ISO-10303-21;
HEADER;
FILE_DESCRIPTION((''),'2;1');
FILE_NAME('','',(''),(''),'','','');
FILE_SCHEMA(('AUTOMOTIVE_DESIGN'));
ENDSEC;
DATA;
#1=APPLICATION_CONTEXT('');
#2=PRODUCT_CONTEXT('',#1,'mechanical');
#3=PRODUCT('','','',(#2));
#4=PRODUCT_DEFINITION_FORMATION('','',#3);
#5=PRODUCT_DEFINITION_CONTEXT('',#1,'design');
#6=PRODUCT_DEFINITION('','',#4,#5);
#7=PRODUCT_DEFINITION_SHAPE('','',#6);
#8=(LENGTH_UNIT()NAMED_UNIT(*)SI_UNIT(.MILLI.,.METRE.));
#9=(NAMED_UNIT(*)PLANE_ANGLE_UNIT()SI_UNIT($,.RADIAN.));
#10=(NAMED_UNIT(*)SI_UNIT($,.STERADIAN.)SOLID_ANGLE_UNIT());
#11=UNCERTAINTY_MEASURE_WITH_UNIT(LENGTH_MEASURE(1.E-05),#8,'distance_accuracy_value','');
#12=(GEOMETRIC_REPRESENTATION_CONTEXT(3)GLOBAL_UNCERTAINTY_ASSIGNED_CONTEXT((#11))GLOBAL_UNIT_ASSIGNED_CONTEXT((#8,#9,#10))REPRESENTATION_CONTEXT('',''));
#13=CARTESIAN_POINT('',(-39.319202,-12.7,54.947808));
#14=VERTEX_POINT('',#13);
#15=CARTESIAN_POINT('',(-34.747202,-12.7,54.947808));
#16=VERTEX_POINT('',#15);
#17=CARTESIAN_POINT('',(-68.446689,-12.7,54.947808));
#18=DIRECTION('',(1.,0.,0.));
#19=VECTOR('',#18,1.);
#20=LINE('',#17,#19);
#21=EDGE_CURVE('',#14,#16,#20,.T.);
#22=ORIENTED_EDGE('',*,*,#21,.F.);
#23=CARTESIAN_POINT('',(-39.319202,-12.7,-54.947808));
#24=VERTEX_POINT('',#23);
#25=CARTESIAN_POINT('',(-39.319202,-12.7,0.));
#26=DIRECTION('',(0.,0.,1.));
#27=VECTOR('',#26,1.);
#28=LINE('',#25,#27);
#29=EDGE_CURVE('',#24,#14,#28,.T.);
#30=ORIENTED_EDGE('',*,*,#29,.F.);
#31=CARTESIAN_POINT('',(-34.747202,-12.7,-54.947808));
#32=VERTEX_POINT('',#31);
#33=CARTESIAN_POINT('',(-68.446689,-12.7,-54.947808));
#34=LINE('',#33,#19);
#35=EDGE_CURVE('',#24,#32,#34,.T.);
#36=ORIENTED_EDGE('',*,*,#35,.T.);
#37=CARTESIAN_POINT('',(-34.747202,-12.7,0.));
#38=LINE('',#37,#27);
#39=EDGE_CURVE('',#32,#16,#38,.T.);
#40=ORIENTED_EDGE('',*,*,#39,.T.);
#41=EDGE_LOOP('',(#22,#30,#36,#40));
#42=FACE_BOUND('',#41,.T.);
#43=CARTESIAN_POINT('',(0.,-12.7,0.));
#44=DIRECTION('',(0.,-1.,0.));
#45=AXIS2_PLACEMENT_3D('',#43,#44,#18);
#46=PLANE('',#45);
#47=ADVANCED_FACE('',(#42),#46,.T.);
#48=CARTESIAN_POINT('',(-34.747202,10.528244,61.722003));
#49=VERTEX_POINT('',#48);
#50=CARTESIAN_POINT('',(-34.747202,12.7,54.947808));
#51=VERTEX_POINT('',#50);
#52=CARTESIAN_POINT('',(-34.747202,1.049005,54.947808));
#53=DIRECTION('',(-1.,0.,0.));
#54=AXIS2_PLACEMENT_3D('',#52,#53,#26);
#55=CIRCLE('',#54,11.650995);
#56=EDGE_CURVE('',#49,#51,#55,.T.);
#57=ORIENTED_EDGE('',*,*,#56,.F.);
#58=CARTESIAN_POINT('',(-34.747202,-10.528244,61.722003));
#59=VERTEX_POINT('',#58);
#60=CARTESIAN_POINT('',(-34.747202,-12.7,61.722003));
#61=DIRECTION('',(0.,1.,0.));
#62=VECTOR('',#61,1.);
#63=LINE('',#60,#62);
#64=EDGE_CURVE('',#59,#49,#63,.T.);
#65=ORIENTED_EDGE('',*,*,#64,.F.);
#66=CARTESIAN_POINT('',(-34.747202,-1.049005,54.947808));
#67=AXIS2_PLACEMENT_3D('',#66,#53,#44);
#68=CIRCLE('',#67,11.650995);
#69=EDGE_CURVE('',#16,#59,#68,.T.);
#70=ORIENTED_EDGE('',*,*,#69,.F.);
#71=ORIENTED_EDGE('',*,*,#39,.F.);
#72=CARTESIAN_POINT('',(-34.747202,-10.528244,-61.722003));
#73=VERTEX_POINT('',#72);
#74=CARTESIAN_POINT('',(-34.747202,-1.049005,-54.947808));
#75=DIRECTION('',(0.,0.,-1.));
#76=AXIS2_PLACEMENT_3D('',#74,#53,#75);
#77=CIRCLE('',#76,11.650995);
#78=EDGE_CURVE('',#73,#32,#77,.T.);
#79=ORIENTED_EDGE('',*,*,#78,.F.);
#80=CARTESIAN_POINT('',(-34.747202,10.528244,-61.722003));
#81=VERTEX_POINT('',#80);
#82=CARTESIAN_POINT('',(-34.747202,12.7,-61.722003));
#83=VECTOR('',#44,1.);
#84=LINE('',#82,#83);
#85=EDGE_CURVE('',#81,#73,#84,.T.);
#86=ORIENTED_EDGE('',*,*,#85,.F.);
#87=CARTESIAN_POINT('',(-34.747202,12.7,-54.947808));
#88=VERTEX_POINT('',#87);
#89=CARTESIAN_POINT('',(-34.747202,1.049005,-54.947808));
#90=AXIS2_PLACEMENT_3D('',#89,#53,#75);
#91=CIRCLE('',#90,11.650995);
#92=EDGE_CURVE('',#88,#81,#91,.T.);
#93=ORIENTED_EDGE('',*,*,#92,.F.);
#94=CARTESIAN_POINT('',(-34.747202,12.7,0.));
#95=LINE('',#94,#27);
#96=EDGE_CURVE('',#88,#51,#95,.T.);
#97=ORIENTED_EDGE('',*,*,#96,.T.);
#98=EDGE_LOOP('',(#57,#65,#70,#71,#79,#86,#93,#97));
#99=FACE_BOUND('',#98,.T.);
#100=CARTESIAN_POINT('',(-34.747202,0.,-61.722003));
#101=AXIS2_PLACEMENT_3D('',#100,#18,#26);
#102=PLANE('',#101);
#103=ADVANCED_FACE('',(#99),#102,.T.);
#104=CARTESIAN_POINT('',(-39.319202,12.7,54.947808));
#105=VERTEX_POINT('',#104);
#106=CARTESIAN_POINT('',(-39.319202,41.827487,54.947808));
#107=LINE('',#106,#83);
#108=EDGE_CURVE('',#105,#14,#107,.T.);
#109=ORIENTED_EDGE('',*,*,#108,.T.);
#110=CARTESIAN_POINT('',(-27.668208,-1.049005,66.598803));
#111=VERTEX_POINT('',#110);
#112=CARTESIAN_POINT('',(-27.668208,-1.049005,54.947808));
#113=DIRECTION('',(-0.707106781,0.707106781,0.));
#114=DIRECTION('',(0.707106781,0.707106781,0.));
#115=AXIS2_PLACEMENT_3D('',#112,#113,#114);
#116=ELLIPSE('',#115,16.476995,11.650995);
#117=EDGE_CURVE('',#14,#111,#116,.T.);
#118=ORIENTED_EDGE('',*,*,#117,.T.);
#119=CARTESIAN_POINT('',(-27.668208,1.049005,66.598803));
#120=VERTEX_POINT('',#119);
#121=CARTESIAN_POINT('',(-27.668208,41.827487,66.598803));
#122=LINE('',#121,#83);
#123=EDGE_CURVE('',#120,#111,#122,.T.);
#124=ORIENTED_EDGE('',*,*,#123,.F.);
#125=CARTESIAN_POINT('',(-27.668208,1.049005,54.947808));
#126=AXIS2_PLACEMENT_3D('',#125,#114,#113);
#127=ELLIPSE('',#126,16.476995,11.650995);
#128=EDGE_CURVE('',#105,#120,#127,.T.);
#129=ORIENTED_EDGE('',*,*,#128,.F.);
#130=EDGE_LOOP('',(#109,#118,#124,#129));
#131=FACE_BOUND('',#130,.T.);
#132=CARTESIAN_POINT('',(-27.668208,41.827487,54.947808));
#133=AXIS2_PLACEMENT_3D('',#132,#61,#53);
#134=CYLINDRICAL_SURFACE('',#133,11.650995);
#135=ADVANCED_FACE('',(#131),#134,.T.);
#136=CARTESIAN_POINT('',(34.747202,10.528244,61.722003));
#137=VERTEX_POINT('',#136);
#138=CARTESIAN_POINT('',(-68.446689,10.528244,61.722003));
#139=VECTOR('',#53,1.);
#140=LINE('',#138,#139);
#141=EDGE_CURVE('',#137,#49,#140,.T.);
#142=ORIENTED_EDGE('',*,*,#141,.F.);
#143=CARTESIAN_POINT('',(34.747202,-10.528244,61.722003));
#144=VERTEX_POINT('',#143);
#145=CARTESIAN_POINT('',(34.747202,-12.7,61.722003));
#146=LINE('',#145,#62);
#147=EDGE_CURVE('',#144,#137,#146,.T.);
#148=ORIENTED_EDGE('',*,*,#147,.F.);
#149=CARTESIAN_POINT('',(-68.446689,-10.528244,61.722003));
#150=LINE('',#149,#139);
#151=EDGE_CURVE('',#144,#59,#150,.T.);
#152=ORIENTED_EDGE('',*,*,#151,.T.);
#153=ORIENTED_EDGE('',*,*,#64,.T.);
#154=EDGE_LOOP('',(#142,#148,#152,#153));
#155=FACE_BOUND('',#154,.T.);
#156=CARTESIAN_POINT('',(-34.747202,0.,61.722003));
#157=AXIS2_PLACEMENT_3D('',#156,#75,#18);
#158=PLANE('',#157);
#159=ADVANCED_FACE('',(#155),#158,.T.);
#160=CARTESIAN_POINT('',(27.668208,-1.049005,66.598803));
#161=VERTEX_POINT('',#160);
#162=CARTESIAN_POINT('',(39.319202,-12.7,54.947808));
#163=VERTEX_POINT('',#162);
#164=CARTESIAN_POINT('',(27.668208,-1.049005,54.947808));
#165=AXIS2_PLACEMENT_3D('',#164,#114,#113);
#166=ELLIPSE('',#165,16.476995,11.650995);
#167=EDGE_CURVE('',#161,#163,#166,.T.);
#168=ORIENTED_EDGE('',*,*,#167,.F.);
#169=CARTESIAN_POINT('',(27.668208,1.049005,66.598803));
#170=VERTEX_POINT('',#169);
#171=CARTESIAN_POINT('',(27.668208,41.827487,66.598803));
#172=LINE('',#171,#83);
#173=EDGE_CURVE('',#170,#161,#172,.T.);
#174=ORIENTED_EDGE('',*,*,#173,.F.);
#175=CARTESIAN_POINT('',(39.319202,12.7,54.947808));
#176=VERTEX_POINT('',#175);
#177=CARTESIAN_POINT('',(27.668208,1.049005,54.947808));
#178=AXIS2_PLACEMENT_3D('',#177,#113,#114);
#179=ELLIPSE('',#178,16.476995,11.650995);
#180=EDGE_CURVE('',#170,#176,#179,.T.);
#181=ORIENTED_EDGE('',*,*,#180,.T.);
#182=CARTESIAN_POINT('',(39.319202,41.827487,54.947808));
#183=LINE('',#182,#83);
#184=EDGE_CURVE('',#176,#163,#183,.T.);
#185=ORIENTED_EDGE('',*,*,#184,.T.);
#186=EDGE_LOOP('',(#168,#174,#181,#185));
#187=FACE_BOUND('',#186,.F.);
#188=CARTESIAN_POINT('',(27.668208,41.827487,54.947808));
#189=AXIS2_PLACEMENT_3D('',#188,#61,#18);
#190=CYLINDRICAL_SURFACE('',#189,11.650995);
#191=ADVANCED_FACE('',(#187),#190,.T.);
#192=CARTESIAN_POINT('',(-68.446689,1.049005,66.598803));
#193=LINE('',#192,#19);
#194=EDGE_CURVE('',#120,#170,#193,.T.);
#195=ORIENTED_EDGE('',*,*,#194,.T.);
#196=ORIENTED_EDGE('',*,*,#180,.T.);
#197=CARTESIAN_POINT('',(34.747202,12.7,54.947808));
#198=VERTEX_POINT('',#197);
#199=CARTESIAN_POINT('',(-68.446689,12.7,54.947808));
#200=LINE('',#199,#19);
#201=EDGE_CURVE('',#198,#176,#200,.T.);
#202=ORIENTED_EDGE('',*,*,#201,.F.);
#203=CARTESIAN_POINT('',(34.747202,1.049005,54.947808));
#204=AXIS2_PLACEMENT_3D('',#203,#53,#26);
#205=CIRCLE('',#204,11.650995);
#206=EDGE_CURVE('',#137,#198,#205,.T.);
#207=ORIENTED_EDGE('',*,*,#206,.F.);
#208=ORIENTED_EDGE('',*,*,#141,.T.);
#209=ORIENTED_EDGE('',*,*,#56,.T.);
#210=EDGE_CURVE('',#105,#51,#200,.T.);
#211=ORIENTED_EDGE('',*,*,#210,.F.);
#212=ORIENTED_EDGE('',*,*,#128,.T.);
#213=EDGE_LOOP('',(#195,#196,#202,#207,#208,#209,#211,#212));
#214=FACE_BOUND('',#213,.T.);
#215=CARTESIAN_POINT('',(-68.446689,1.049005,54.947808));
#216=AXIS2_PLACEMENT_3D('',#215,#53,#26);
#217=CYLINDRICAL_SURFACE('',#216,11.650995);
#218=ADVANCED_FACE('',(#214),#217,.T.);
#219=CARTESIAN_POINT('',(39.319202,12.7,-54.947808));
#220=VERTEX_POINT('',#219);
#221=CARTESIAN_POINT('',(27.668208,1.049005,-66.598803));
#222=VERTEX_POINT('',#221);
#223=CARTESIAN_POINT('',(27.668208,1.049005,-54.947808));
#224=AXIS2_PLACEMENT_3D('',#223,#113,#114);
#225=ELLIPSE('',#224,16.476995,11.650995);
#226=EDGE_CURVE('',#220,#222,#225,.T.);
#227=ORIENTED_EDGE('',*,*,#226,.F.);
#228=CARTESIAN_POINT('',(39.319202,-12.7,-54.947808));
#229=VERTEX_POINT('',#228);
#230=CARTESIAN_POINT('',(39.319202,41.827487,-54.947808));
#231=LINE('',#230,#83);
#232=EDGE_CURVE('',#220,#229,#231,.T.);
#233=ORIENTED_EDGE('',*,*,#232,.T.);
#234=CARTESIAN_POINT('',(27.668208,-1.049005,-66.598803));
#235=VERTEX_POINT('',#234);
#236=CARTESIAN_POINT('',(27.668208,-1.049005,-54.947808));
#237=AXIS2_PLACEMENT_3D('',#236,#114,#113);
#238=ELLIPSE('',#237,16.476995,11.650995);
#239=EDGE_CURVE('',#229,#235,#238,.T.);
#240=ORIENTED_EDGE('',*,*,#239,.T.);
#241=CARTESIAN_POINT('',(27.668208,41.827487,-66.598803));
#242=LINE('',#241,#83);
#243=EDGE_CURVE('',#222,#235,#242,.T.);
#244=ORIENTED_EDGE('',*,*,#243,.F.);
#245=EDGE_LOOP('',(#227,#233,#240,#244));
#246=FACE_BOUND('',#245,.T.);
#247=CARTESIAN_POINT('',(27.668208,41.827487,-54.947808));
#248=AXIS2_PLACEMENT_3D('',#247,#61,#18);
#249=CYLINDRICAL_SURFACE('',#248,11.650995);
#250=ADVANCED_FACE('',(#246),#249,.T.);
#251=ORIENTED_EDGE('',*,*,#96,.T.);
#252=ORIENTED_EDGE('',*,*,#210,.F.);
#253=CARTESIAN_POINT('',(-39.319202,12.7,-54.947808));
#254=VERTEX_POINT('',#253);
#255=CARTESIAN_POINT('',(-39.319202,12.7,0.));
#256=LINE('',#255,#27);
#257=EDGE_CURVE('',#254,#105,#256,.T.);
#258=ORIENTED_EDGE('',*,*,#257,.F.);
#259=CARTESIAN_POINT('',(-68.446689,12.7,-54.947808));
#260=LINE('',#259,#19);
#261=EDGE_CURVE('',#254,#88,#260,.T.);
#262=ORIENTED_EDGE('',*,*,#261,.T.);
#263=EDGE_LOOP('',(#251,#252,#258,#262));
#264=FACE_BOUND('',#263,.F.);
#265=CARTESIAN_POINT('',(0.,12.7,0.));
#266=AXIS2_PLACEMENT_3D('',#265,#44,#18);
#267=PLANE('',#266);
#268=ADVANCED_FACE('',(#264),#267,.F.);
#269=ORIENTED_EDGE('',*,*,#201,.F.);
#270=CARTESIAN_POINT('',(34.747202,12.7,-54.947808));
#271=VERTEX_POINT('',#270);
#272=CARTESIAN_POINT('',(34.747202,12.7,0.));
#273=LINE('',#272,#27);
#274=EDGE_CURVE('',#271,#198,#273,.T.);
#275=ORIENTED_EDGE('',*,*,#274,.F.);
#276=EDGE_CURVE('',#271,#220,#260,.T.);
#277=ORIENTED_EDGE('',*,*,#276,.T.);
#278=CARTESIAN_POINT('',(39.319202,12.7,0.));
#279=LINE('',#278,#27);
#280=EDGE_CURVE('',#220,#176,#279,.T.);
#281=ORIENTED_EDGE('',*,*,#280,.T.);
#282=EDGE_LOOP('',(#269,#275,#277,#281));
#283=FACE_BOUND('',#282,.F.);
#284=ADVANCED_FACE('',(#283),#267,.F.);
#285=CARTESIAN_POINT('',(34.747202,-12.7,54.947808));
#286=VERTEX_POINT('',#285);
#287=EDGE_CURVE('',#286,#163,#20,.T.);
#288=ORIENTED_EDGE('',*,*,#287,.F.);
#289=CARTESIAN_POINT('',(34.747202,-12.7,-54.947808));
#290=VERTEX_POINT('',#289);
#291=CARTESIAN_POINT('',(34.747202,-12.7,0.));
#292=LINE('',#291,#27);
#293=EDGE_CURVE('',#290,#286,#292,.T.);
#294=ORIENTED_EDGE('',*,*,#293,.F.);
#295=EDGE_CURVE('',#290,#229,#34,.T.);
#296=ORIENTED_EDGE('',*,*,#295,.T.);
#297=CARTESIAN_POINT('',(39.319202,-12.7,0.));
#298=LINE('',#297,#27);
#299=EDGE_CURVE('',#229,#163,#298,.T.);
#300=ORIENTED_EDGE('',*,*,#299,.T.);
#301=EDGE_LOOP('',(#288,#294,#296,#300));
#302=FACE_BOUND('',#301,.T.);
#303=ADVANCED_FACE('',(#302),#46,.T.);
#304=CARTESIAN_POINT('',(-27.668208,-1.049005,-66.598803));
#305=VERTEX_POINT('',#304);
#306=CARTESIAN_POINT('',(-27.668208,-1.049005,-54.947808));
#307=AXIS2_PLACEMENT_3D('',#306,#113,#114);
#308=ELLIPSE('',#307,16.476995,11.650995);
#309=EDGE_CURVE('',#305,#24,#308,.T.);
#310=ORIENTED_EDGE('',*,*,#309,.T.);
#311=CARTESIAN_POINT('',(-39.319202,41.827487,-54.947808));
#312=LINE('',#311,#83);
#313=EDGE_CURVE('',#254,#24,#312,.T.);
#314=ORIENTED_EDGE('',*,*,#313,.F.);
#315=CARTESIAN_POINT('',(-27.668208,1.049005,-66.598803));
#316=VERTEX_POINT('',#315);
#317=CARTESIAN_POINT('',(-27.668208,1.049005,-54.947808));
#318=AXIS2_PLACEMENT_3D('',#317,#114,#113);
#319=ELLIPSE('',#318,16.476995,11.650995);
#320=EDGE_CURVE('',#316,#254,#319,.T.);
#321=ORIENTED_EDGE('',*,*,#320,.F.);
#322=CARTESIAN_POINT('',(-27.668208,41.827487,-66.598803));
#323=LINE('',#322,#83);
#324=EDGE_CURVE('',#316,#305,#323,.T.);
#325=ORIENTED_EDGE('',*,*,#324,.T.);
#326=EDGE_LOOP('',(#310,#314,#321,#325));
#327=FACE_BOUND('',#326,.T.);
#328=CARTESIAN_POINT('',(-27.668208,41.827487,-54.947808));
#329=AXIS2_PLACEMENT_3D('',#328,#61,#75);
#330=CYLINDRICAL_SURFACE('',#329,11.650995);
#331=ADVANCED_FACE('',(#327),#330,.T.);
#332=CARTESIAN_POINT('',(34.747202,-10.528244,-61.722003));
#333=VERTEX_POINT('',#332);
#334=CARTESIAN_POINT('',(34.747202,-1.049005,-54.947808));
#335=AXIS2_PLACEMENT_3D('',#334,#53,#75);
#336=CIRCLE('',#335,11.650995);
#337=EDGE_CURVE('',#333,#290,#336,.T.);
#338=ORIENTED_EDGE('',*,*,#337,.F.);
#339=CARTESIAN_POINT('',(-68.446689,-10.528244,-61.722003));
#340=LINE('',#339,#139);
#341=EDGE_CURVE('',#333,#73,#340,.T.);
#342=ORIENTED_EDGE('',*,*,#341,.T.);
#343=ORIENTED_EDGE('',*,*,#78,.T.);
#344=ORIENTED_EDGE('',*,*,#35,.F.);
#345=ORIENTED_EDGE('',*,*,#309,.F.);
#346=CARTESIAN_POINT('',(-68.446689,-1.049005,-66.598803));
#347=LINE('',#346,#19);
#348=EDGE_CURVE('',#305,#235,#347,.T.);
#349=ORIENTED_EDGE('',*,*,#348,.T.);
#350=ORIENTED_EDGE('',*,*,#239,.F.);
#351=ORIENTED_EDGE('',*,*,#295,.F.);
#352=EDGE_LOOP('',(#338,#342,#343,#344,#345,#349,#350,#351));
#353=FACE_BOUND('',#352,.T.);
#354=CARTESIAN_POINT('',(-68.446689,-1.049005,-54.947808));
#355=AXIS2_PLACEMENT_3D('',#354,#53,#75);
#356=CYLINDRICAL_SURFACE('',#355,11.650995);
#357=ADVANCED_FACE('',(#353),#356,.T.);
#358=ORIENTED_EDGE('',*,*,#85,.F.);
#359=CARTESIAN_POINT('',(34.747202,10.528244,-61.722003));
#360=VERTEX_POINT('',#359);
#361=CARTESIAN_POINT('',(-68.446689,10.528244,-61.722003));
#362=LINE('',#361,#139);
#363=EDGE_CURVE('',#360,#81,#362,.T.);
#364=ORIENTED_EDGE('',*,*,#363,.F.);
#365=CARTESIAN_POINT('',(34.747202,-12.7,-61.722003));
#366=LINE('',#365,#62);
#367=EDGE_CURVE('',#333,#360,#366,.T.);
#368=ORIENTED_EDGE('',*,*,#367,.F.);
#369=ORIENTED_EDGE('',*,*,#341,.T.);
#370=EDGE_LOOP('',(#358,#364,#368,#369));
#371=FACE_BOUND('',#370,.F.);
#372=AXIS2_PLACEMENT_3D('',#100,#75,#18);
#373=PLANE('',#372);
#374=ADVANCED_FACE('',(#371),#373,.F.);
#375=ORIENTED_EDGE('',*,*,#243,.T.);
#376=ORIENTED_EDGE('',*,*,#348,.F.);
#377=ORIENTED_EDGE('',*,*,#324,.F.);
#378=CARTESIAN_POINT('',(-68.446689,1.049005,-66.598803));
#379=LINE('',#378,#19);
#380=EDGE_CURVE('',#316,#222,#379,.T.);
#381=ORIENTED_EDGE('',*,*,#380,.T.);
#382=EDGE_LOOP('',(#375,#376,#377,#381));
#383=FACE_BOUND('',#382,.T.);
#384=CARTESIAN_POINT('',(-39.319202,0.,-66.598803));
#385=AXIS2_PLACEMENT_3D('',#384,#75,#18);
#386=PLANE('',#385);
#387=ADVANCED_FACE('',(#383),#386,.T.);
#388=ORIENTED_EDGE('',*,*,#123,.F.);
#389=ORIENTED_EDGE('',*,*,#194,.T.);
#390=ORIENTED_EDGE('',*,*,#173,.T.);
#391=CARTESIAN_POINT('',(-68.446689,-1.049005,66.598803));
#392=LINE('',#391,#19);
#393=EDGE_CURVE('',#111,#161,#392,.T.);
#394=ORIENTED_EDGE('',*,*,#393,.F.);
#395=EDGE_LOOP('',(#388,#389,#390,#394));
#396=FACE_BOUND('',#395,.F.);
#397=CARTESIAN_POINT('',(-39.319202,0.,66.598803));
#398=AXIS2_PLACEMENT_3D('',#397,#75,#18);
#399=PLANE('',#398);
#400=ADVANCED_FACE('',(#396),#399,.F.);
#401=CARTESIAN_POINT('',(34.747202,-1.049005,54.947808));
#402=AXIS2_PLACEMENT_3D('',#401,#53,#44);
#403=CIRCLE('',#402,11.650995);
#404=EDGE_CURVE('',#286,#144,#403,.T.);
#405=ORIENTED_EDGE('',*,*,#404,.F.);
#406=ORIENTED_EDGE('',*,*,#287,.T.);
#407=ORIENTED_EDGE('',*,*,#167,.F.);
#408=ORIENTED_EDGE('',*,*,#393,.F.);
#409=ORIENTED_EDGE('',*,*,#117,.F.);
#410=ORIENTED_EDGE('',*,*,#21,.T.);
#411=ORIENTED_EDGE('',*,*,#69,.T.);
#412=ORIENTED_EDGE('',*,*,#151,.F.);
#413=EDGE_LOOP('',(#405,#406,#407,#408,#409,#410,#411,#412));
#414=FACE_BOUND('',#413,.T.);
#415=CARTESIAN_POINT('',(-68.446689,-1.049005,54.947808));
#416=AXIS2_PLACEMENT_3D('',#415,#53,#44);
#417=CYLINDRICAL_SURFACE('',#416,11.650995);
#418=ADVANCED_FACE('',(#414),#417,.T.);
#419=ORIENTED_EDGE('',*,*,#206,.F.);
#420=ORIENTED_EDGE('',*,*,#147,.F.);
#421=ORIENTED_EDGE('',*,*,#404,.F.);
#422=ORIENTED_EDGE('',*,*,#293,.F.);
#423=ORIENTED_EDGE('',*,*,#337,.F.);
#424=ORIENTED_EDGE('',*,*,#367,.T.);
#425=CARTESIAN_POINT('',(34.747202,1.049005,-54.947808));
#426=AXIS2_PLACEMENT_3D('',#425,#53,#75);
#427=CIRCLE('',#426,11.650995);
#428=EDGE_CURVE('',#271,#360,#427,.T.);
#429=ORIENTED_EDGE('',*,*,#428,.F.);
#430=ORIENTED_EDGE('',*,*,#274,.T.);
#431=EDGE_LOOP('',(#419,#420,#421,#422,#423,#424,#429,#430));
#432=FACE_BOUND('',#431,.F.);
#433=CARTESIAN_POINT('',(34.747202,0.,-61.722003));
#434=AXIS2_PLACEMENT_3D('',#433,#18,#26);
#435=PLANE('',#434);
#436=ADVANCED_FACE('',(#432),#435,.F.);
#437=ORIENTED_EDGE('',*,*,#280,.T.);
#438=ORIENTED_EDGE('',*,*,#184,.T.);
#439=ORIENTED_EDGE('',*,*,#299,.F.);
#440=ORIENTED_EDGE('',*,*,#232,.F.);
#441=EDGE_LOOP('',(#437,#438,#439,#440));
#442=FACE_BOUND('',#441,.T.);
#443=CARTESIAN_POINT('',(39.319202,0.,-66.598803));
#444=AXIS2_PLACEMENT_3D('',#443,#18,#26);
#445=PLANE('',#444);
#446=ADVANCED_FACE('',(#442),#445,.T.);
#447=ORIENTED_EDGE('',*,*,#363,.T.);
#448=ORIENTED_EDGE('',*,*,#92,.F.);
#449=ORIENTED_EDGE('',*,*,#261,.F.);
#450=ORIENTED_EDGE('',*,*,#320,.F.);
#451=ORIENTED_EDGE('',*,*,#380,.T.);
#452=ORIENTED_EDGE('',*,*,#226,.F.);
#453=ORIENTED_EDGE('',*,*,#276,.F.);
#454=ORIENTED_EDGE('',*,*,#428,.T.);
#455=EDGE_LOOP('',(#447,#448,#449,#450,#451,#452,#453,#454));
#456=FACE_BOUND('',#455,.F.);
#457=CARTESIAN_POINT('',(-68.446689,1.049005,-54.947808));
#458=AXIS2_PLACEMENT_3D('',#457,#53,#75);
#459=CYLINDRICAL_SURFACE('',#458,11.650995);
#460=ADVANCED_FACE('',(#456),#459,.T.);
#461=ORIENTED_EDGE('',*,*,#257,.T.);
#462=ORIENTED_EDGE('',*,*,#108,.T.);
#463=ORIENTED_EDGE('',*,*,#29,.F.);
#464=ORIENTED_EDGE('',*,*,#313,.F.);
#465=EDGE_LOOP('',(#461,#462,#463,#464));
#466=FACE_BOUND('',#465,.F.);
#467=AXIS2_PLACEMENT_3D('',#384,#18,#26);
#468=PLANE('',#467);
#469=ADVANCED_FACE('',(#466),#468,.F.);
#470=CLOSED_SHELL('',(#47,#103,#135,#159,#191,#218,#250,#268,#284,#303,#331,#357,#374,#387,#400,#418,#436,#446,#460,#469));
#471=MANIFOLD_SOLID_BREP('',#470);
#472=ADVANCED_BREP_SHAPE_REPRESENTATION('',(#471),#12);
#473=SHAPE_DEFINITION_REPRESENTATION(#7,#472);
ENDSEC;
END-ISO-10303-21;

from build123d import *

# Parameters (mm, degrees)
F0_W        = 78.6384046078
F0_H        = 133.1976056099
F0_W_2      = 69.4944038987
F0_H_2      = 123.444005847
F1_DEPTH    = 12.7
F2_T1_DEPTH = 83.6549732601
F2_T3_DEPTH = 136.8933778678


# Not quite as in the source:
# - a fillet or chamfer that OpenCascade refuses, or shapes differently, is made with other operations: its cross-section is extruded or revolved along the edge and cut away or added


with BuildPart() as f1:
    # F0 (on Front) → F1 (new body, symmetric)
    with BuildSketch(Plane.XZ):
        Rectangle(F0_W, F0_H)
        Rectangle(F0_W_2, F0_H_2, mode=Mode.SUBTRACT)
    extrude(amount=F1_DEPTH, both=True)

    # F2: fillet of radius 11.650994652 on 8 edges, made by hand

    # F2_s2 → F2_t1 (cut)
    with BuildSketch(Plane.XZ.offset(-41.82748663)):
        with BuildLine():
            ThreePointArc((39.3192023039, 54.9478081529), (35.9067049779, 63.1863054789), (27.6682076519, 66.5988028049))
            Line((27.6682076519, 66.5988028049), (39.3192023039, 66.5988028049))
            Line((39.3192023039, 66.5988028049), (39.3192023039, 54.9478081529))
        make_face()
        with BuildLine():
            ThreePointArc((-39.3192023039, 54.9478081529), (-35.9067049779, 63.1863054789), (-27.6682076519, 66.5988028049))
            Line((-27.6682076519, 66.5988028049), (-39.3192023039, 66.5988028049))
            Line((-39.3192023039, 66.5988028049), (-39.3192023039, 54.9478081529))
        make_face()
        with BuildLine():
            ThreePointArc((39.3192023039, -54.9478081529), (35.9067049779, -63.1863054789), (27.6682076519, -66.5988028049))
            Line((27.6682076519, -66.5988028049), (39.3192023039, -66.5988028049))
            Line((39.3192023039, -66.5988028049), (39.3192023039, -54.9478081529))
        make_face()
        with BuildLine():
            ThreePointArc((-27.6682076519, -66.5988028049), (-35.9067049779, -63.1863054789), (-39.3192023039, -54.9478081529))
            Line((-39.3192023039, -54.9478081529), (-39.3192023039, -66.5988028049))
            Line((-39.3192023039, -66.5988028049), (-27.6682076519, -66.5988028049))
        make_face()
    extrude(amount=F2_T1_DEPTH, mode=Mode.SUBTRACT)

    # F2_s4 → F2_t3 (cut)
    with BuildSketch(Plane.YZ.offset(-68.4466889339)):
        with BuildLine():
            ThreePointArc((1.049005348, 66.5988028049), (9.287502674, 63.1863054789), (12.7, 54.9478081529))
            Line((12.7, 54.9478081529), (12.7, 66.5988028049))
            Line((12.7, 66.5988028049), (1.049005348, 66.5988028049))
        make_face()
        with BuildLine():
            ThreePointArc((-12.7, 54.9478081529), (-9.287502674, 63.1863054789), (-1.049005348, 66.5988028049))
            Line((-1.049005348, 66.5988028049), (-12.7, 66.5988028049))
            Line((-12.7, 66.5988028049), (-12.7, 54.9478081529))
        make_face()
        with BuildLine():
            ThreePointArc((1.049005348, -66.5988028049), (9.287502674, -63.1863054789), (12.7, -54.9478081529))
            Line((12.7, -54.9478081529), (12.7, -66.5988028049))
            Line((12.7, -66.5988028049), (1.049005348, -66.5988028049))
        make_face()
        with BuildLine():
            ThreePointArc((-1.049005348, -66.5988028049), (-9.287502674, -63.1863054789), (-12.7, -54.9478081529))
            Line((-12.7, -54.9478081529), (-12.7, -66.5988028049))
            Line((-12.7, -66.5988028049), (-1.049005348, -66.5988028049))
        make_face()
    extrude(amount=F2_T3_DEPTH, mode=Mode.SUBTRACT)


solid = f1.part
